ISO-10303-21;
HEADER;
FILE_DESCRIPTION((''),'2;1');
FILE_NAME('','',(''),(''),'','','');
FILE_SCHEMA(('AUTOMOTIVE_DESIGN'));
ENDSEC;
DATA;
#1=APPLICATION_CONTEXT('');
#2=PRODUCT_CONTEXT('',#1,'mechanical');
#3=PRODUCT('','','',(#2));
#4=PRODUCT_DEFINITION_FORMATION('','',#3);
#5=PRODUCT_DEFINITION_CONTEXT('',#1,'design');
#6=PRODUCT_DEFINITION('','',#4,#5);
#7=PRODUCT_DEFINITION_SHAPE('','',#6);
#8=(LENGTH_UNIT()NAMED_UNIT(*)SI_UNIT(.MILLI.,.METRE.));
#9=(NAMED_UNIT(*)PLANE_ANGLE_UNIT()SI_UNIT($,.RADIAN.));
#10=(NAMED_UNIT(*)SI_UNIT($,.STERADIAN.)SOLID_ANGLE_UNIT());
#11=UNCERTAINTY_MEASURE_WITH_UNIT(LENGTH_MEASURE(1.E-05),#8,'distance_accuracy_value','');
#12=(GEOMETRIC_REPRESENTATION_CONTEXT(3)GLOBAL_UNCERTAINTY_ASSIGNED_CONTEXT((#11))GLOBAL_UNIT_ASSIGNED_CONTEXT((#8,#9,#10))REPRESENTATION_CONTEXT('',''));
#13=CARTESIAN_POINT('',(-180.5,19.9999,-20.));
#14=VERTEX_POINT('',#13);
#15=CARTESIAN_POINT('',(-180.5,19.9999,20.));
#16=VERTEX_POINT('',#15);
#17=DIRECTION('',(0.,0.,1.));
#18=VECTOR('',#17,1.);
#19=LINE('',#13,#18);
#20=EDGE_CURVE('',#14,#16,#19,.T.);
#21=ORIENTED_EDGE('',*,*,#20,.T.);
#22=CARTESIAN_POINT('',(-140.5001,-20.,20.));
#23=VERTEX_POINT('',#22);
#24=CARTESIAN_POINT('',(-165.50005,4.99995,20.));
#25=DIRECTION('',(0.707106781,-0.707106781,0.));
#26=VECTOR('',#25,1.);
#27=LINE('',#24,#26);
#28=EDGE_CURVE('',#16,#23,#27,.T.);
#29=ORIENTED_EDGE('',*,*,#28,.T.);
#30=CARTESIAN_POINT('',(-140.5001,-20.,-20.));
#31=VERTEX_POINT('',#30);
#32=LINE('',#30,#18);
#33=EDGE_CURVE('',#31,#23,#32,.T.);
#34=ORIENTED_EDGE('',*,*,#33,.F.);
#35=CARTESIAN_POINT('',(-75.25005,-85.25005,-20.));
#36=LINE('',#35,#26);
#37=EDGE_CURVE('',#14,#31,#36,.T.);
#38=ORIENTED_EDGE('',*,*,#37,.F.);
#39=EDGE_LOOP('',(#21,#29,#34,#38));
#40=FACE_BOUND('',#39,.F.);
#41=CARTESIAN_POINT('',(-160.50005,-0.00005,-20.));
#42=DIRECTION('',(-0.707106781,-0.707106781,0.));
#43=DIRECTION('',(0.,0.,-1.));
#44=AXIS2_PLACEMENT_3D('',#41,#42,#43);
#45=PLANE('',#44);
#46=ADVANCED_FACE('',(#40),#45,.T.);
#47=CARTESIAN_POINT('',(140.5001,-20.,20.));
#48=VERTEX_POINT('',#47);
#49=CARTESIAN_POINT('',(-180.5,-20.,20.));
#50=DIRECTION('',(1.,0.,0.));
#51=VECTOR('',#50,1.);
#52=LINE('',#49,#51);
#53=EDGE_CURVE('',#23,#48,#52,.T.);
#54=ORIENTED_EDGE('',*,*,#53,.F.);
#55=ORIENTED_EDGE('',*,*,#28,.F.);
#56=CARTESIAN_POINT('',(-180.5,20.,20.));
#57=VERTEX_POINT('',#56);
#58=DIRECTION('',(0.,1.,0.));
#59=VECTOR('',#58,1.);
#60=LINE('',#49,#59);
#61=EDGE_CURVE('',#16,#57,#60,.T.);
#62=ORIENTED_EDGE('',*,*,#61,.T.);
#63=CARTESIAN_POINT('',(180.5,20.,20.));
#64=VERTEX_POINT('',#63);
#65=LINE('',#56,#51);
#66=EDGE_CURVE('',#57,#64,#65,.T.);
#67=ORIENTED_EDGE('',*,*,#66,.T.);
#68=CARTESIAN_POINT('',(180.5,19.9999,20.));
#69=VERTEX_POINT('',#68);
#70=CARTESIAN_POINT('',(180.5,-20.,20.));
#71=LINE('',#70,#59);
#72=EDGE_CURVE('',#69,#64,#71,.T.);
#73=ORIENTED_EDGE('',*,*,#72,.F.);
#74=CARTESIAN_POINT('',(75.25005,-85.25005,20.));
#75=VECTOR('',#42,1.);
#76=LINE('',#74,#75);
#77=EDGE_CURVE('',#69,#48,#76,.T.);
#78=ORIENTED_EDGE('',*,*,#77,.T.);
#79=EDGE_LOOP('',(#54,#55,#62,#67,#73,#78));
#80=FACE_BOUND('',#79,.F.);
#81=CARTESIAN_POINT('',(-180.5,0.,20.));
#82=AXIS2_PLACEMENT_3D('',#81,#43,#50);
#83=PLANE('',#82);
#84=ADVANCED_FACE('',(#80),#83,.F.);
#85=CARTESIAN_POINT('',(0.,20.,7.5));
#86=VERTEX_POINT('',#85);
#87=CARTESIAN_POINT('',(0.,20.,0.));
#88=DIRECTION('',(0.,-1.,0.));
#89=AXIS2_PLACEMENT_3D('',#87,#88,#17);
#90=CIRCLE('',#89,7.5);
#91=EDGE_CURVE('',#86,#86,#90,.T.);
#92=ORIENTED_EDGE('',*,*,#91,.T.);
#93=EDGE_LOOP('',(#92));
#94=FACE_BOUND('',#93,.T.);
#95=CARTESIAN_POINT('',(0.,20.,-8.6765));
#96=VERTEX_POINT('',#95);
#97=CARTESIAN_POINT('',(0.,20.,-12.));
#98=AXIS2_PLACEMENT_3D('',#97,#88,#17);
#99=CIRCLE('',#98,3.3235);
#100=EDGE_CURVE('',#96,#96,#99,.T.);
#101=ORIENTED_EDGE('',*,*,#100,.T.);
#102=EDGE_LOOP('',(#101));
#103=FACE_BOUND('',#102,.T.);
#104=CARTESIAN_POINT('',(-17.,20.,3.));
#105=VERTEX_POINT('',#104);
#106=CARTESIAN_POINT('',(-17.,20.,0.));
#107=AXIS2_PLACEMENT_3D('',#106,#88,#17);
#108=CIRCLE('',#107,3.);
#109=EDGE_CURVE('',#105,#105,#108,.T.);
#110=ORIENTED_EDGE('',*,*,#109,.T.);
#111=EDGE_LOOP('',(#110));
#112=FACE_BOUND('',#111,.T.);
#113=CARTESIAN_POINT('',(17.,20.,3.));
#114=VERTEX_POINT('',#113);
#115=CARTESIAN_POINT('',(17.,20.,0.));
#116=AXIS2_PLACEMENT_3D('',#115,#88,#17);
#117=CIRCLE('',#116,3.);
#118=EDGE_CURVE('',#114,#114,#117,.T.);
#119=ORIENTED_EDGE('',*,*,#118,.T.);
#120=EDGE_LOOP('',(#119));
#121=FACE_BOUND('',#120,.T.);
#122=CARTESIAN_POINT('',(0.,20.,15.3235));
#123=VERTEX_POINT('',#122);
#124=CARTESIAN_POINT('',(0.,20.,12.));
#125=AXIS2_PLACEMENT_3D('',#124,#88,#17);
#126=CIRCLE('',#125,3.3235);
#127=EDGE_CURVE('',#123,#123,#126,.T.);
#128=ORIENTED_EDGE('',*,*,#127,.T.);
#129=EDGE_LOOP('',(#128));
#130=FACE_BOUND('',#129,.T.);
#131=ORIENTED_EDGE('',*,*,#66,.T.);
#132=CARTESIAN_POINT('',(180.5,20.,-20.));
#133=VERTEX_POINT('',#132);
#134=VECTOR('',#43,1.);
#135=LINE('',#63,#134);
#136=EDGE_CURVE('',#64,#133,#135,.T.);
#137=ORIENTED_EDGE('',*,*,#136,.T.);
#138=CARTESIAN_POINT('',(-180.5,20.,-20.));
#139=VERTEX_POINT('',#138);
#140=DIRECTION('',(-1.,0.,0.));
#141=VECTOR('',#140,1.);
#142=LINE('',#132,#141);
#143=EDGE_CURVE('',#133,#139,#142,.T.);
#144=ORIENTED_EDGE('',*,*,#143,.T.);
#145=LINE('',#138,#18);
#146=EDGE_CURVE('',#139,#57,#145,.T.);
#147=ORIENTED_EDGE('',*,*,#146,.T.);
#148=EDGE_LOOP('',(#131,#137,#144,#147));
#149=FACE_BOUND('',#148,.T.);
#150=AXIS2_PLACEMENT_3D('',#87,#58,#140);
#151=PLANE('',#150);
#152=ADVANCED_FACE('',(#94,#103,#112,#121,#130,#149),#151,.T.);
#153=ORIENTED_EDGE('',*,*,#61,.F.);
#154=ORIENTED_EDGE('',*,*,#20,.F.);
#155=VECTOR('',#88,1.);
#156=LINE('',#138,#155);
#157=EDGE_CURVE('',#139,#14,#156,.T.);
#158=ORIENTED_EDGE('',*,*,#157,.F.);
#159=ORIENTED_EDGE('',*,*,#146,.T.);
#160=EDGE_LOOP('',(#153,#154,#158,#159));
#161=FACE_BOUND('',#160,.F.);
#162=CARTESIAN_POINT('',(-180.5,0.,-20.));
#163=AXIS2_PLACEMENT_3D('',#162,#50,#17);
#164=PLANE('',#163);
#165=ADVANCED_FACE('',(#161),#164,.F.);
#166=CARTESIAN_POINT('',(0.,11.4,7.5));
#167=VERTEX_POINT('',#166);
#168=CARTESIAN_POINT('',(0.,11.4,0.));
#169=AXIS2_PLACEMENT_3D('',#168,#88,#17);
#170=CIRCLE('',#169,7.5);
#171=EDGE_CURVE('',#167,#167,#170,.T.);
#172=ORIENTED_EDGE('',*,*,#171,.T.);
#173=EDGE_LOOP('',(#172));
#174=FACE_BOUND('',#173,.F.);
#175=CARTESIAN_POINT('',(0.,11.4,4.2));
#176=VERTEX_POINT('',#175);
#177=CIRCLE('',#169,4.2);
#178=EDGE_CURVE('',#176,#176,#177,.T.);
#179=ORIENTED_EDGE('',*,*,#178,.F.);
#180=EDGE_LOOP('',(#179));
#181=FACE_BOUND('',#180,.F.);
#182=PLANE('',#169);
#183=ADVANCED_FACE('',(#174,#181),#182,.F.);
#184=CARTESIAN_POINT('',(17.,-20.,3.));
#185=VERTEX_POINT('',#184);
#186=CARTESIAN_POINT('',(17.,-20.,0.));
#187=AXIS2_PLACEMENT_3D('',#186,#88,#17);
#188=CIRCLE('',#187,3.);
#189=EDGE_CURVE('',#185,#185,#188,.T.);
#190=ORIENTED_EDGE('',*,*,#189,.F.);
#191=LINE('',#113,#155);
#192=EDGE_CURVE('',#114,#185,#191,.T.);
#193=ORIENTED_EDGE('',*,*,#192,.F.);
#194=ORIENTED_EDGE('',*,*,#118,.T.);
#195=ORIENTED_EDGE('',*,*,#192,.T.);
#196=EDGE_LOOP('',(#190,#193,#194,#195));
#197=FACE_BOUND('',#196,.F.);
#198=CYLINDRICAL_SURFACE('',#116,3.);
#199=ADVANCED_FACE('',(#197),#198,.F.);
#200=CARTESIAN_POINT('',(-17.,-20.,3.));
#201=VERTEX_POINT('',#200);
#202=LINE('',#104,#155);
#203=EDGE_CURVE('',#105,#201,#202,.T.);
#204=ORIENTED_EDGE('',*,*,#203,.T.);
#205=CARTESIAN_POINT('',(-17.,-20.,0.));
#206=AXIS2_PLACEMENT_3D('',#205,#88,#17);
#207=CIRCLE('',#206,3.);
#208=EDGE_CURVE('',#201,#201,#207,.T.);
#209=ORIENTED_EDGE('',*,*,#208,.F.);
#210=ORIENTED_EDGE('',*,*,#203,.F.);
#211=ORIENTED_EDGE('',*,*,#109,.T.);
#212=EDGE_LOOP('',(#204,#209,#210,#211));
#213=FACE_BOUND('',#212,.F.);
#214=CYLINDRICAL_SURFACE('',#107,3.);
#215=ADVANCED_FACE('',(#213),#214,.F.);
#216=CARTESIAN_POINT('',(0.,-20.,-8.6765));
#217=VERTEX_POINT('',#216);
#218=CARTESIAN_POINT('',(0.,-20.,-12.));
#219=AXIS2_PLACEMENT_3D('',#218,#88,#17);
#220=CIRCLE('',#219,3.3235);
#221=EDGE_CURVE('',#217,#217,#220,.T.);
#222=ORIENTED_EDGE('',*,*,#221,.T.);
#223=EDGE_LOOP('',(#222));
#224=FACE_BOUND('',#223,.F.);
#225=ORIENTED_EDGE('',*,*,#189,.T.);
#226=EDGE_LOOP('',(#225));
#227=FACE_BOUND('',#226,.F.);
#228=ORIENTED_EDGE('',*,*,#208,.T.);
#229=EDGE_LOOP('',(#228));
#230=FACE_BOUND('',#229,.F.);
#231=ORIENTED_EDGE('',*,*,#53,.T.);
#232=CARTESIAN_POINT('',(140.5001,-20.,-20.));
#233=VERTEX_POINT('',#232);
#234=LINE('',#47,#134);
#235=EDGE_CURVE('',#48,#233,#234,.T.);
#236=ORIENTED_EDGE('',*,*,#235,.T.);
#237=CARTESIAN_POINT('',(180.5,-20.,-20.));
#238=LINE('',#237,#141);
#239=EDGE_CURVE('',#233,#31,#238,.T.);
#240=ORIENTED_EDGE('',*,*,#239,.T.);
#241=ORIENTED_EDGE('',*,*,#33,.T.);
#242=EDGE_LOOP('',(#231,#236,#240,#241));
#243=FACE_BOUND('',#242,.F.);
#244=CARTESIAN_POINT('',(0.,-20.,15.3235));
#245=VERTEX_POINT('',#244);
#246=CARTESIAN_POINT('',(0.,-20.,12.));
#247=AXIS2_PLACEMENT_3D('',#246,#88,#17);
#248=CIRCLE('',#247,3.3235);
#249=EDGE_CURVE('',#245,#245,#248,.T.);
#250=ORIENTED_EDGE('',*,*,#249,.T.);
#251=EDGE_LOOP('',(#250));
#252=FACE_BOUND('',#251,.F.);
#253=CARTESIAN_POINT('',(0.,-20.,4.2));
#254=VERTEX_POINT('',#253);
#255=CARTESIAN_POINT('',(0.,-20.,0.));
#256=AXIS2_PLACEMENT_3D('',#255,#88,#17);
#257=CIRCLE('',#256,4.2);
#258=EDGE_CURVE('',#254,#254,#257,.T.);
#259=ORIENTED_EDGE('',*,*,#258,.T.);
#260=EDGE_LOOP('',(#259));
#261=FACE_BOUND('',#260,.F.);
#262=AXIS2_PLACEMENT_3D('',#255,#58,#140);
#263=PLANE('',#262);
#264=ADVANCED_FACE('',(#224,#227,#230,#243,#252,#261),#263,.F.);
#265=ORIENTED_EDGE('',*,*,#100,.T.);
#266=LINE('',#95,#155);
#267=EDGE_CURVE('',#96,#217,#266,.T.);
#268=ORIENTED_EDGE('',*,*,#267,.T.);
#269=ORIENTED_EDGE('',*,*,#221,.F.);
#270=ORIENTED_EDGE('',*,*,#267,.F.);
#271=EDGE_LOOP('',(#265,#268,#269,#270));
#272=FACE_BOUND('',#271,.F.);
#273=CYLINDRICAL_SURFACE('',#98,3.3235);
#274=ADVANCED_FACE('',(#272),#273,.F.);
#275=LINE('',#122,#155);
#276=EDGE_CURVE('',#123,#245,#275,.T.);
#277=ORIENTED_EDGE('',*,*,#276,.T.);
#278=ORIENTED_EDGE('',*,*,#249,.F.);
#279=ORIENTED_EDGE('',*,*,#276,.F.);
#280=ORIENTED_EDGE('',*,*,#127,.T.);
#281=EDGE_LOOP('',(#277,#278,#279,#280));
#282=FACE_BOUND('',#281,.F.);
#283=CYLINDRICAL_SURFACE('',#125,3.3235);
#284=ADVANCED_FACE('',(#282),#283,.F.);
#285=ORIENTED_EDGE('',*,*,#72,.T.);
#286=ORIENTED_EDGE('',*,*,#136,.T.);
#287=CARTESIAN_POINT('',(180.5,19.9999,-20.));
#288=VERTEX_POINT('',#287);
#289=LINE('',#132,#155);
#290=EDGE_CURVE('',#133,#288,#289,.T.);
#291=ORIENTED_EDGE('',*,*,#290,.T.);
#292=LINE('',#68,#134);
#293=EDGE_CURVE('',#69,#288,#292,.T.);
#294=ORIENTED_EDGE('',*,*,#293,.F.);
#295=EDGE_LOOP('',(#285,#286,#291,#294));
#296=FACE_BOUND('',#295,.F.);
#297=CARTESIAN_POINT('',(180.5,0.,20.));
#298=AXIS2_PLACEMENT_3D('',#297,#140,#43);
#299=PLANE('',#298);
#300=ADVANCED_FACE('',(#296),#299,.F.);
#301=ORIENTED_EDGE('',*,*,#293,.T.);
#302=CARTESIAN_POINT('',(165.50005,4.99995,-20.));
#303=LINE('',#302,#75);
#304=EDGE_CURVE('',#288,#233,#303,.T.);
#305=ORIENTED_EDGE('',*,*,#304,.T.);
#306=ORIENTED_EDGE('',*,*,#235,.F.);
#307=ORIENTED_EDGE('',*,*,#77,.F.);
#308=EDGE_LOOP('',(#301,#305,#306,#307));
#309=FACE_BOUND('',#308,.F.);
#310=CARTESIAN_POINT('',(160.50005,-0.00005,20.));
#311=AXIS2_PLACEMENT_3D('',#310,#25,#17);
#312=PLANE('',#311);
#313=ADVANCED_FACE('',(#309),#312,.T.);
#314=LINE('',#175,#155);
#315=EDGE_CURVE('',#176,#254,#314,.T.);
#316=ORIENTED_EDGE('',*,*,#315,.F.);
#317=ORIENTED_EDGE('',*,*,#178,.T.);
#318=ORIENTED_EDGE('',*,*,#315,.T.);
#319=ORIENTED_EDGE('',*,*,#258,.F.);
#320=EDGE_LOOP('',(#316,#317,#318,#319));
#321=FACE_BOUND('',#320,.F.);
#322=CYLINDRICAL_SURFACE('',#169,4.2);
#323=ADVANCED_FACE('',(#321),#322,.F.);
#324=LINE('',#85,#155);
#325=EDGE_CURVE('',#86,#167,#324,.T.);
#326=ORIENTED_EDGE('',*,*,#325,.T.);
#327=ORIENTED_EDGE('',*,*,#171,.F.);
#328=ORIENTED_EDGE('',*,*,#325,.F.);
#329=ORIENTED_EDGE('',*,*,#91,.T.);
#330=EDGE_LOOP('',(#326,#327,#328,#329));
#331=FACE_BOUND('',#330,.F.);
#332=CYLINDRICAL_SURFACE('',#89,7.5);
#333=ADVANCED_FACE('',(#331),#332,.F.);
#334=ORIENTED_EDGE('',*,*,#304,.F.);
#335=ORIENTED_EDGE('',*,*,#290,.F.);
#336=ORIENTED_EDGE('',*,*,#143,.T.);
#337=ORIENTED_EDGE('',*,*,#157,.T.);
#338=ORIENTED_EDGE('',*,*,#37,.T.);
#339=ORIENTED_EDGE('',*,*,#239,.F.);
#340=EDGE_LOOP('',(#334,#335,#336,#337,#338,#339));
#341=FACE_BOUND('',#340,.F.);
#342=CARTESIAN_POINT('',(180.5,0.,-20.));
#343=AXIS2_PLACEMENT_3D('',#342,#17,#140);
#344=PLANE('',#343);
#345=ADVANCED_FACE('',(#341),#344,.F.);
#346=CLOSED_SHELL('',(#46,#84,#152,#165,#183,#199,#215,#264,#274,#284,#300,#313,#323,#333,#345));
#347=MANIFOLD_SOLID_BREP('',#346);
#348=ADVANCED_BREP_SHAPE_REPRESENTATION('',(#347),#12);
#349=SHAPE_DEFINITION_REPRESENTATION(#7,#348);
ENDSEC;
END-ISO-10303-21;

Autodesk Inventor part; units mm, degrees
ref_plane "YZ Plane" through (0, 0, 0) normal (1, 0, 0) x (0, 1, 0)
ref_plane "XZ Plane" through (0, 0, 0) normal (0, 1, 0) x (-1, 0, 0)
ref_plane "XY Plane" through (0, 0, 0) normal (0, 0, 1) x (1, 0, 0)
sketch "Skizze1" plane through (0, 0, 0) normal (0, 1, 0) x (-1, 0, 0)
  line L0 (180.5, 20) -> (-180.5, 20)
  line L1 (-180.5, 20) -> (-180.5, -20)
  line L2 (-180.5, -20) -> (180.5, -20)
  line L3 (180.5, -20) -> (180.5, 20)
  line L4 (180.5, 20) -> (-180.5, -20) construction
  line L5 (-180.5, 20) -> (180.5, -20) construction
  point P0 (0, 0)
  dimension "d0" = 361
  dimension "d1" = 40
extrude "Extrusion1" add sketch "Skizze1" along normal mid plane 40
chamfer "Fasen1" distance 40 angle 45 2 edges at (-180.5, -20, 0) (180.5, -20, 0)
sketch "Skizze2" plane through (0, 20, 0) normal (0, 1, 0) x (1, 0, 0)
  line L0 (180.5, -20) -> (180.5, 20) projected
  line L1 (-180.5, 20) -> (-180.5, -20) projected
  line L2 (180.5, 20) -> (-180.5, 20) projected
  line L3 (-180.5, 0) -> (180.5, 0) construction
  line L4 (0, 28) -> (0, -28) projected
  point P0 (0, 0)
  point P1 (0, 0)
  point P2 (17, 0)
  point P3 (-17, 0)
  point P4 (0, -12)
  point P5 (0, 12)
  point P6 (0, 0)
  dimension "d24" = 20
  dimension "d25" = 17
  dimension "d26" = 17
  dimension "d34" = 12
  dimension "d35" = 12
hole "Bohrung1" at (17, 20, 0) at (-17, 20, 0) direction (0, -1, 0) diameter 6 end through all
hole "Hole3" at (0, 20, 0) direction (0, -1, 0) diameter 8.4 end through all counterbore diameter 15 counterbore depth 8.6
hole "Hole4" at (0, 20, 12) at (0, 20, -12) direction (0, -1, 0) diameter 6.647 end through all thread size "M8x1.25" class "6H" standard "ISO Metric profile"
equation "\"d0\" = Laenge_Rahmen"
equation "\"d1\" = Breite_Rahmen"
equation "\"d2\" = Hoehe_Rahmen"
equation "\"d4\" = Breite_Rahmen"
equation "\"d24\" = Abstand_Bohrung_Rahmen"
equation "\"d25\" = 0.5 * Abtand_Fuehrungsstifte"
equation "\"d26\" = d25"
equation "\"d34\" = Madenschrauben_Abstand"
equation "\"d35\" = d34"
equation "\"d9\" = Durchmesser_Stifte"
equation "\"Breite_Rahmen\" = 40"
equation "\"Hoehe_Rahmen\" = Breite_Rahmen"
equation "\"Breite_Bauteiltraeger\" = 239"
equation "\"Lange_Bauteiltraeger\" = Breite_Bauteiltraeger"
equation "\"Laenge_Rahmen\" = Innenmaß_Rahmen + 2 * Breite_Rahmen"
equation "\"Toleranz_Verstellung\" = 1"
equation "\"Abtand_Fuehrungsstifte\" = 34"
equation "\"Durchmesser_Stifte\" = 6"
equation "\"Abstand_Bohrung_Rahmen\" = 20"
equation "\"Madenschrauben_Abstand\" = 12"
equation "\"Innenmaß_Rahmen\" = 281"
properties part number "TS_Positionierungseinheit_Rahmen_int"
